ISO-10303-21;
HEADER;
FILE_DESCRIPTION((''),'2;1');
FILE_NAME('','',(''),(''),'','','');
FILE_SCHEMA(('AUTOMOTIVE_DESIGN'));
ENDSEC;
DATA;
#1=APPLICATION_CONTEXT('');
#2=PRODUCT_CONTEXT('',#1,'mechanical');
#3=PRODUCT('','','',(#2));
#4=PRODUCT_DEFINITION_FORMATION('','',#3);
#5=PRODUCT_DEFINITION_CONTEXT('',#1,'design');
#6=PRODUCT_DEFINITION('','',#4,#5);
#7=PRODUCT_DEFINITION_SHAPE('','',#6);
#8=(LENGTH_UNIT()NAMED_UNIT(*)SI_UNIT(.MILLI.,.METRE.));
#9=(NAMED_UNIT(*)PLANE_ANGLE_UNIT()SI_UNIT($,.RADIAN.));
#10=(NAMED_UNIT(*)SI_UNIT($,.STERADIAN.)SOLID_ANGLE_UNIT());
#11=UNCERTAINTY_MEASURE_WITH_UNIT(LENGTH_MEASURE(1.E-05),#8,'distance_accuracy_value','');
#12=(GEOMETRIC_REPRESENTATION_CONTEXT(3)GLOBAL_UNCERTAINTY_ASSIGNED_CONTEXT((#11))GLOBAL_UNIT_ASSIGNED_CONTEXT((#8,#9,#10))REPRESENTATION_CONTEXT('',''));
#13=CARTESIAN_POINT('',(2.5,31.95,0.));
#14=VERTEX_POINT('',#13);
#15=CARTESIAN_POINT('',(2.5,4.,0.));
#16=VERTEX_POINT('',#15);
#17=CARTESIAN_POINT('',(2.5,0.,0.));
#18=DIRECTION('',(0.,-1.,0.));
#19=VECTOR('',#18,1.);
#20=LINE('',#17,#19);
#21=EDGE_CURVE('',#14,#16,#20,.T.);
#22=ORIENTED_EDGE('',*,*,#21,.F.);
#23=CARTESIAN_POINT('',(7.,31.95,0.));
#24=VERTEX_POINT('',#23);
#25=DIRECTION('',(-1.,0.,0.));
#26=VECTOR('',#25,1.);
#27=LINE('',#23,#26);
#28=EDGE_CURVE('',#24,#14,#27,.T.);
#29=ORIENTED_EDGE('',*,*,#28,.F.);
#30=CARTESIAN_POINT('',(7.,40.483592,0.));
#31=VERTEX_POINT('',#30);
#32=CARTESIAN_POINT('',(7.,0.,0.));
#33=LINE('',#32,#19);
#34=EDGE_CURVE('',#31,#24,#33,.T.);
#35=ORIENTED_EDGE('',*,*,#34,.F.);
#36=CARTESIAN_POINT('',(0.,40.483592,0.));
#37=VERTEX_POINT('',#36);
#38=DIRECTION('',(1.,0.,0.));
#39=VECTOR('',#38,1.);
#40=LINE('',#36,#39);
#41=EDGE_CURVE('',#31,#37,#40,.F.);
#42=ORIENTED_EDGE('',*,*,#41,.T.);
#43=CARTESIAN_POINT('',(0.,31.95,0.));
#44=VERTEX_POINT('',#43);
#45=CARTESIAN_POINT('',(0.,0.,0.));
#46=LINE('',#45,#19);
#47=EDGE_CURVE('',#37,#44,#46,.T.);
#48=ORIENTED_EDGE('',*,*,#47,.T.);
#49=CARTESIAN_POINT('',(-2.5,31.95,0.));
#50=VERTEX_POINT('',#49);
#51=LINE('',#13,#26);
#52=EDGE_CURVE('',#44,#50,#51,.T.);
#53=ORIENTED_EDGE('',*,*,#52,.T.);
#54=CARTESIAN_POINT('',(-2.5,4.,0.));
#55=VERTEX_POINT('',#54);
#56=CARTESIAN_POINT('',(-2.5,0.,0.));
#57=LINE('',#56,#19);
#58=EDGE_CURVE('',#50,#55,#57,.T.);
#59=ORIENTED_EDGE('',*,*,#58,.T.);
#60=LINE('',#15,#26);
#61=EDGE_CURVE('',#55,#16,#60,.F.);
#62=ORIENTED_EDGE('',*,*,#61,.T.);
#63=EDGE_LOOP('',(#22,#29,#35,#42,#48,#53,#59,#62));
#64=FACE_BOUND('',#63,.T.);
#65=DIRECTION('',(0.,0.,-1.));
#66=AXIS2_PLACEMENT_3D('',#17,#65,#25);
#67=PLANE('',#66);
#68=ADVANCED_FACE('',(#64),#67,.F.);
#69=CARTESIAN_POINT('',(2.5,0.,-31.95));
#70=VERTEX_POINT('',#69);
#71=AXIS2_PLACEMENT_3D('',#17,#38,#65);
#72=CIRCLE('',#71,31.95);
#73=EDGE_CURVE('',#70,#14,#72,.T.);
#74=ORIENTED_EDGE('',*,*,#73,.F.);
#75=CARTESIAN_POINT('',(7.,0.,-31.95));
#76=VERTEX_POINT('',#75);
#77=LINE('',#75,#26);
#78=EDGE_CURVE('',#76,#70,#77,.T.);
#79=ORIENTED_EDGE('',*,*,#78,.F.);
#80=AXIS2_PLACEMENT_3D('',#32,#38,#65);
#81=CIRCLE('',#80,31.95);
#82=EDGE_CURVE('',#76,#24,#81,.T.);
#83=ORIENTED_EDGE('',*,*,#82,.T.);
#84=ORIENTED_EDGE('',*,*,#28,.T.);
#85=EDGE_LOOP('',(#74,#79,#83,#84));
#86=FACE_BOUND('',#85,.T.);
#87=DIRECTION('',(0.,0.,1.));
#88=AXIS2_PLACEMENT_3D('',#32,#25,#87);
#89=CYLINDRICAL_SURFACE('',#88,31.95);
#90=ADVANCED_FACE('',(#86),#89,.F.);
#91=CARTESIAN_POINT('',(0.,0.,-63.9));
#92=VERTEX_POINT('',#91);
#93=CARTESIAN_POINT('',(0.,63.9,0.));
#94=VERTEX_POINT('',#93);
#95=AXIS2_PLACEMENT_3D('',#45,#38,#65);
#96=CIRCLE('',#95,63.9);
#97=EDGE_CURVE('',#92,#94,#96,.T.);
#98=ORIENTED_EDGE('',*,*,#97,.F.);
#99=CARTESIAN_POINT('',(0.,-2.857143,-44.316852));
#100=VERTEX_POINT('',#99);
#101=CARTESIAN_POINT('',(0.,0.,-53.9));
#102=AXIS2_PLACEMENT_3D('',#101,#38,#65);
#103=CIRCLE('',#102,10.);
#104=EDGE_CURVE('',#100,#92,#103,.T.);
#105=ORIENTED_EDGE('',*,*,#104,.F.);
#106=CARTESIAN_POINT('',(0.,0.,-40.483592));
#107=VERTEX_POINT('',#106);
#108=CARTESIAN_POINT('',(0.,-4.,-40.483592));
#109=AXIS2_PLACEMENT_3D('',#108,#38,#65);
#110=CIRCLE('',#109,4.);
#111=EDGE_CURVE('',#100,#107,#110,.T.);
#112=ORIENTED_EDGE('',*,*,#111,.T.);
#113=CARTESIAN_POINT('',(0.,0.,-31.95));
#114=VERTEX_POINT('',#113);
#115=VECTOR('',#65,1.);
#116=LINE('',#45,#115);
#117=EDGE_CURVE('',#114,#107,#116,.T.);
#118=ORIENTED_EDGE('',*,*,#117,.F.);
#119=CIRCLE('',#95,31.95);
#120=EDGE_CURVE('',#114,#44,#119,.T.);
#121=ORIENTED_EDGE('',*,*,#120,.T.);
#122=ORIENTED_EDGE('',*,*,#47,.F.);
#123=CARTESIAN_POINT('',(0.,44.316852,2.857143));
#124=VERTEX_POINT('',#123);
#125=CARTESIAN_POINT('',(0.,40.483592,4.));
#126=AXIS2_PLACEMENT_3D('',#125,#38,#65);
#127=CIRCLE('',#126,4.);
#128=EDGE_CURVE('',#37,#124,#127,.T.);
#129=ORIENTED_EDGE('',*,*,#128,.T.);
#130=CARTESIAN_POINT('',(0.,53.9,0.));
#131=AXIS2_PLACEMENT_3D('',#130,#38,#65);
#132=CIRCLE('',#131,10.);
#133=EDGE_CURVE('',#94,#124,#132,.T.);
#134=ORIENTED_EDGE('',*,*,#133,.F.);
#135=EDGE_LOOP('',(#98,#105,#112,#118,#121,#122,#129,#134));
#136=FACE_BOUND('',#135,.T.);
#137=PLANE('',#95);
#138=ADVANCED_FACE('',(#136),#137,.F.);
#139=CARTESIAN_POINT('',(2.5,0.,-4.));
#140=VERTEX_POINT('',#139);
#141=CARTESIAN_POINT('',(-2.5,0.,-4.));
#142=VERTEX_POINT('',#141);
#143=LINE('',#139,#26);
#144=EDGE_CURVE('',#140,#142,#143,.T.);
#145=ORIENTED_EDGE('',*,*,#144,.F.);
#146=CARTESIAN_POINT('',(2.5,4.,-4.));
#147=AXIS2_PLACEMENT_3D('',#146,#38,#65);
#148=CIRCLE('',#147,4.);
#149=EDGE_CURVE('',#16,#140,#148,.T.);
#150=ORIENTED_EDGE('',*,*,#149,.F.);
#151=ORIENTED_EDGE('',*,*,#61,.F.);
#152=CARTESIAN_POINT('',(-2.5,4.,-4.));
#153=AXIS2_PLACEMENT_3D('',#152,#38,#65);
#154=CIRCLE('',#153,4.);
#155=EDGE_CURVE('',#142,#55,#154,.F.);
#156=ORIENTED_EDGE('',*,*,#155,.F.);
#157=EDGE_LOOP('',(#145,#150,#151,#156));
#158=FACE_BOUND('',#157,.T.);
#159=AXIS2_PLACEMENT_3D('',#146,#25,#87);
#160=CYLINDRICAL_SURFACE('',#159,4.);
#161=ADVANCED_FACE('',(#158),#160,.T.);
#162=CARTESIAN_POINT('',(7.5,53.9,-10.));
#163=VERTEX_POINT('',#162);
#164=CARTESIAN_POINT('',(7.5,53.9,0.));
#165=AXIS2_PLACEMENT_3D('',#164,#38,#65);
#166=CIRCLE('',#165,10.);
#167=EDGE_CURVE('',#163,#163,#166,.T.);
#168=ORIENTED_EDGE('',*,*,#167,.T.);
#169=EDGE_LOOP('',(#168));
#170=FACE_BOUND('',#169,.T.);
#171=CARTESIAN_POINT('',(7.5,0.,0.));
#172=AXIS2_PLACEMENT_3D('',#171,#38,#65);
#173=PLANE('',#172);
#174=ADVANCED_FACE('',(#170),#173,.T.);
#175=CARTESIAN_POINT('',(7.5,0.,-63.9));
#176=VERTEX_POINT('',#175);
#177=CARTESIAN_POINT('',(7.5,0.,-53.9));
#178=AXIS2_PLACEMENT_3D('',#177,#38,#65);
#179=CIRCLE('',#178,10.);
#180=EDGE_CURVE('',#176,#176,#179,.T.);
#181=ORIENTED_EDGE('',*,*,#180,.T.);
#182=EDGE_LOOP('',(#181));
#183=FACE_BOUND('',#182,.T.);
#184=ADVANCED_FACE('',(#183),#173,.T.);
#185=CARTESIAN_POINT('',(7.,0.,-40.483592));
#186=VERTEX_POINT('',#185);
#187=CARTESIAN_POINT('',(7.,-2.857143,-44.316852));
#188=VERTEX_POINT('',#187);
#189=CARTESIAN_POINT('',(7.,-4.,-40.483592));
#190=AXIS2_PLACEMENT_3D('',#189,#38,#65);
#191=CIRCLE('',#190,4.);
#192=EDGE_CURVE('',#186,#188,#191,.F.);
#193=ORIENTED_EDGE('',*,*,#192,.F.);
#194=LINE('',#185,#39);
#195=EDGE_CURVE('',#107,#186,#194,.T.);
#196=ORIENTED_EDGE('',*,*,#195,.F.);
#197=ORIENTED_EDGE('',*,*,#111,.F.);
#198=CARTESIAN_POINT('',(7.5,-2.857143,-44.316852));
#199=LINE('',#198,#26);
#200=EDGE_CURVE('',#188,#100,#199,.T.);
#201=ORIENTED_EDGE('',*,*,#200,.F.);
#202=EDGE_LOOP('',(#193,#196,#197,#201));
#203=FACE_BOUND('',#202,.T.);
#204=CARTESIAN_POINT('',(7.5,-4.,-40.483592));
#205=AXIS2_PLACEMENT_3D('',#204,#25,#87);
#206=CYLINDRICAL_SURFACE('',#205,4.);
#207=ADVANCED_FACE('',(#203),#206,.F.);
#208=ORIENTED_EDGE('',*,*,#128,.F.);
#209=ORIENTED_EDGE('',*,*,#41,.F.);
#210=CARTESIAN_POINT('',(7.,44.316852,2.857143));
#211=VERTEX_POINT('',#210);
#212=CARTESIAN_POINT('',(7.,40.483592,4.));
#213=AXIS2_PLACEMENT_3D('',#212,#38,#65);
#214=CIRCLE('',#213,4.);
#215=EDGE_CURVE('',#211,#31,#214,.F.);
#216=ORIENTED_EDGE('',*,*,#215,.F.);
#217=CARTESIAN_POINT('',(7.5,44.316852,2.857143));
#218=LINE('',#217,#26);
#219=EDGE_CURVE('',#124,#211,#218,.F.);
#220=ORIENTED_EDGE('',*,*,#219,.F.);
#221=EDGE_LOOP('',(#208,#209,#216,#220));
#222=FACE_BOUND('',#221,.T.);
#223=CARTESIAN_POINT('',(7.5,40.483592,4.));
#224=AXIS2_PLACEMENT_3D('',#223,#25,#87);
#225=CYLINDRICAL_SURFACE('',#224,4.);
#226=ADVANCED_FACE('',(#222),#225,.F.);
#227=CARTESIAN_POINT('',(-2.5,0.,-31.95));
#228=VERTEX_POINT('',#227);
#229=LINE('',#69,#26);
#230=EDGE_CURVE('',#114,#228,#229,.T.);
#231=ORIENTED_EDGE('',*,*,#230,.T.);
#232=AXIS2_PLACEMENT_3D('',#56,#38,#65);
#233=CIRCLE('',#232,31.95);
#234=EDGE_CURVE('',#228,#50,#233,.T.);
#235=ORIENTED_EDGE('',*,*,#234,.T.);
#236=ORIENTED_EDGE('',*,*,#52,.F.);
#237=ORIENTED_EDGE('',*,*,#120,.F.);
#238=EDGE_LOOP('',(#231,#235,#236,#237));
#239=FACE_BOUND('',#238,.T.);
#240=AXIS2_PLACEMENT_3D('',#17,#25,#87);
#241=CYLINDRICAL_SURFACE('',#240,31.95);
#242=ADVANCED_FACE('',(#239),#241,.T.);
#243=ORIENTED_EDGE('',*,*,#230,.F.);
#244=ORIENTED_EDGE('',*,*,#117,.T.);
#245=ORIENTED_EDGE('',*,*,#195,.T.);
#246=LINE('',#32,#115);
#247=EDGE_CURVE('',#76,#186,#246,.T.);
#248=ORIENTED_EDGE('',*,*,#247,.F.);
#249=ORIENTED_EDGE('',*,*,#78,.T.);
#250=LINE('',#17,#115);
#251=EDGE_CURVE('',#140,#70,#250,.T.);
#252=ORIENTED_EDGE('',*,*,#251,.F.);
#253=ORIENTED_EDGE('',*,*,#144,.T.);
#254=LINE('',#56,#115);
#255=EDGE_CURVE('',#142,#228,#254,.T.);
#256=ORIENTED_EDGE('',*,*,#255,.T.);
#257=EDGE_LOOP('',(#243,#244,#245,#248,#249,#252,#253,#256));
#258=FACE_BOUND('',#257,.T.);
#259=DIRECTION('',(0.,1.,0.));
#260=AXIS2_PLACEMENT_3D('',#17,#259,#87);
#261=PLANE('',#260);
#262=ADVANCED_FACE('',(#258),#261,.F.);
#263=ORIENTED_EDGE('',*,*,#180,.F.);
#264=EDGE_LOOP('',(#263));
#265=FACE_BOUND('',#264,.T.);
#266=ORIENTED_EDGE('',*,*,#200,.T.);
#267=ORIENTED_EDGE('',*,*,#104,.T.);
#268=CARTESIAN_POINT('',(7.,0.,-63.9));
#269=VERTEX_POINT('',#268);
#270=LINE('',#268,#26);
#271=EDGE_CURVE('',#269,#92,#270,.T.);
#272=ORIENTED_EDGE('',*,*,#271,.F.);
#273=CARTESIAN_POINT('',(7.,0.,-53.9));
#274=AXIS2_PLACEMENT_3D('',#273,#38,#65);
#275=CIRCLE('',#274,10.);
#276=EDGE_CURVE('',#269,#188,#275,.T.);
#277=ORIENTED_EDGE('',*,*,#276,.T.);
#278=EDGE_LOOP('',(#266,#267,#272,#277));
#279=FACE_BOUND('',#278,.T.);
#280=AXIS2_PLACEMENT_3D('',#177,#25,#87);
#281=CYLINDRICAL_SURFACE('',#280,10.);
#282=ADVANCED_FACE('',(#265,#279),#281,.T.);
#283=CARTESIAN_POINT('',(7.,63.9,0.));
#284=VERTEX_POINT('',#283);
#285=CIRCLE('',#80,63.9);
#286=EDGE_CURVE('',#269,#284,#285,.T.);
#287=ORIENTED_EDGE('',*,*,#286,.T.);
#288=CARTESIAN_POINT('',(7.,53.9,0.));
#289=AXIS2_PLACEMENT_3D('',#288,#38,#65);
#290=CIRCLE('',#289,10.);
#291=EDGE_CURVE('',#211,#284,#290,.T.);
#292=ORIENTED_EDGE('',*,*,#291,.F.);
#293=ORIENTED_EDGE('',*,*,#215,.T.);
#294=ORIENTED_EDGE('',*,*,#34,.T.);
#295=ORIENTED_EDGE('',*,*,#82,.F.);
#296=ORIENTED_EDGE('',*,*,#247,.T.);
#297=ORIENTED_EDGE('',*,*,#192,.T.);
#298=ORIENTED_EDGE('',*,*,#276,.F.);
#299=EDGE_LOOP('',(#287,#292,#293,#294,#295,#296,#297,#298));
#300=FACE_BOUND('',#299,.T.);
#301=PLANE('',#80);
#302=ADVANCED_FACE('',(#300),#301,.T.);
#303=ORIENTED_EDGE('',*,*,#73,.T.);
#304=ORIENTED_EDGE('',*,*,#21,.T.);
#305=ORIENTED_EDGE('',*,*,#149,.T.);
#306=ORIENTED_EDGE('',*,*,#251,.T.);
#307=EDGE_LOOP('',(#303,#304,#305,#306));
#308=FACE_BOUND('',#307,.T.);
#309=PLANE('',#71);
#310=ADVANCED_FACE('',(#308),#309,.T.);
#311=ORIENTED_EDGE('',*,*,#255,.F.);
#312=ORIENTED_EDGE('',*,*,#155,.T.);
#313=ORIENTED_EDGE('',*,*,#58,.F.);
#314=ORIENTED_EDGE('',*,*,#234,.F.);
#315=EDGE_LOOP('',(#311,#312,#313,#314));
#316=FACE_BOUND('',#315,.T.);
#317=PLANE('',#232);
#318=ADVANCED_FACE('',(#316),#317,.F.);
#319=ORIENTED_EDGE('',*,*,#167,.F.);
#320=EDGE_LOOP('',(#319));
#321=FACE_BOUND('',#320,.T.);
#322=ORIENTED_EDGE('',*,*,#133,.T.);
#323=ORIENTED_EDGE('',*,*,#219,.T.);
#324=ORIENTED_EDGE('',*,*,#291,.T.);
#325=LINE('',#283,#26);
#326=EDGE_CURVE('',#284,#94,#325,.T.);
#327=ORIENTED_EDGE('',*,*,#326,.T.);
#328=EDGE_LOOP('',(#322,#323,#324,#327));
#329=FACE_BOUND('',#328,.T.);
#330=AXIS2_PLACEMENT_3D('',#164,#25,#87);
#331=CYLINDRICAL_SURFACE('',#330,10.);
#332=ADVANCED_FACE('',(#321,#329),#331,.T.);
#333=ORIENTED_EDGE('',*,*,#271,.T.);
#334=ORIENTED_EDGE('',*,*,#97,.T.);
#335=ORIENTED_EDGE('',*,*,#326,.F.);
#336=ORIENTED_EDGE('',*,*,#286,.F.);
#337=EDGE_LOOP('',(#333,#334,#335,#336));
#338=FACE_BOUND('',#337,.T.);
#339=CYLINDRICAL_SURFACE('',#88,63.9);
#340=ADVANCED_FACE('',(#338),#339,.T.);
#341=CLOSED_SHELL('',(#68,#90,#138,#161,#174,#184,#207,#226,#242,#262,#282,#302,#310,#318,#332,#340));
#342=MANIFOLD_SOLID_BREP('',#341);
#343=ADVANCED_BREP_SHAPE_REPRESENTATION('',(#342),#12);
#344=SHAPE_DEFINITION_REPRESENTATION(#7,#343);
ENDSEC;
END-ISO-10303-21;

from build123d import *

# Parameters (mm, degrees)
SALIENTE_EXTRUIR1_DEPTH = 2.5
SALIENTE_EXTRUIR2_START = 7
SALIENTE_EXTRUIR2_DEPTH = 7
SALIENTE_EXTRUIR3_START = 7.5
CROQUIS2_4_R            = 10
SALIENTE_EXTRUIR3_DEPTH = 7.5
REDONDEO1_R             = 4
REDONDEO2_R             = 4


with BuildPart() as part:
    # Croquis2 → Saliente-Extruir1 (new, symmetric)
    with BuildSketch(Plane(origin=(0, 0, 0), x_dir=(0, 0, -1), z_dir=(1, 0, 0))):
        with BuildLine():
            ThreePointArc((31.95, 0), (22.592061659, 22.592061659), (0, 31.95))
            Line((0, 31.95), (0, 0))
            Line((0, 0), (31.95, 0))
        make_face()
    extrude(amount=SALIENTE_EXTRUIR1_DEPTH, both=True)

    # Croquis2<3> → Saliente-Extruir2 (add)
    with BuildSketch(Plane(origin=(0, 0, 0), x_dir=(0, 0, -1), z_dir=(1, 0, 0)).offset(SALIENTE_EXTRUIR2_START)):
        with BuildLine():
            ThreePointArc((10, 53.9), (7.071067812, 46.828932188), (0, 43.9))
            Line((0, 43.9), (0, 31.95))
            ThreePointArc((0, 31.95), (22.592061659, 22.592061659), (31.95, 0))
            Line((31.95, 0), (43.9, 0))
            ThreePointArc((43.9, 0), (53.9, 10), (63.9, 0))
            ThreePointArc((63.9, 0), (45.184123318, 45.184123318), (0, 63.9))
            ThreePointArc((0, 63.9), (7.071067812, 60.971067812), (10, 53.9))
        make_face()
    extrude(amount=-SALIENTE_EXTRUIR2_DEPTH)

    # Croquis2<4> → Saliente-Extruir3 (add)
    with BuildSketch(Plane(origin=(0, 0, 0), x_dir=(0, 0, -1), z_dir=(1, 0, 0)).offset(SALIENTE_EXTRUIR3_START)):
        with Locations((0, 53.9)):
            Circle(CROQUIS2_4_R)
        with Locations((53.9, 0)):
            Circle(CROQUIS2_4_R)
    extrude(amount=-SALIENTE_EXTRUIR3_DEPTH)

    # Redondeo1
    redondeo1_edges = [part.edges().sort_by_distance(p)[0] for p in [
        (0, 0, 0),
    ]]
    fillet(redondeo1_edges, radius=REDONDEO1_R)

    # Redondeo2
    redondeo2_edges = [part.edges().sort_by_distance(p)[0] for p in [
        (3.5, 0, -43.9),
        (3.5, 43.9, 0),
    ]]
    fillet(redondeo2_edges, radius=REDONDEO2_R)


solid = part.part
